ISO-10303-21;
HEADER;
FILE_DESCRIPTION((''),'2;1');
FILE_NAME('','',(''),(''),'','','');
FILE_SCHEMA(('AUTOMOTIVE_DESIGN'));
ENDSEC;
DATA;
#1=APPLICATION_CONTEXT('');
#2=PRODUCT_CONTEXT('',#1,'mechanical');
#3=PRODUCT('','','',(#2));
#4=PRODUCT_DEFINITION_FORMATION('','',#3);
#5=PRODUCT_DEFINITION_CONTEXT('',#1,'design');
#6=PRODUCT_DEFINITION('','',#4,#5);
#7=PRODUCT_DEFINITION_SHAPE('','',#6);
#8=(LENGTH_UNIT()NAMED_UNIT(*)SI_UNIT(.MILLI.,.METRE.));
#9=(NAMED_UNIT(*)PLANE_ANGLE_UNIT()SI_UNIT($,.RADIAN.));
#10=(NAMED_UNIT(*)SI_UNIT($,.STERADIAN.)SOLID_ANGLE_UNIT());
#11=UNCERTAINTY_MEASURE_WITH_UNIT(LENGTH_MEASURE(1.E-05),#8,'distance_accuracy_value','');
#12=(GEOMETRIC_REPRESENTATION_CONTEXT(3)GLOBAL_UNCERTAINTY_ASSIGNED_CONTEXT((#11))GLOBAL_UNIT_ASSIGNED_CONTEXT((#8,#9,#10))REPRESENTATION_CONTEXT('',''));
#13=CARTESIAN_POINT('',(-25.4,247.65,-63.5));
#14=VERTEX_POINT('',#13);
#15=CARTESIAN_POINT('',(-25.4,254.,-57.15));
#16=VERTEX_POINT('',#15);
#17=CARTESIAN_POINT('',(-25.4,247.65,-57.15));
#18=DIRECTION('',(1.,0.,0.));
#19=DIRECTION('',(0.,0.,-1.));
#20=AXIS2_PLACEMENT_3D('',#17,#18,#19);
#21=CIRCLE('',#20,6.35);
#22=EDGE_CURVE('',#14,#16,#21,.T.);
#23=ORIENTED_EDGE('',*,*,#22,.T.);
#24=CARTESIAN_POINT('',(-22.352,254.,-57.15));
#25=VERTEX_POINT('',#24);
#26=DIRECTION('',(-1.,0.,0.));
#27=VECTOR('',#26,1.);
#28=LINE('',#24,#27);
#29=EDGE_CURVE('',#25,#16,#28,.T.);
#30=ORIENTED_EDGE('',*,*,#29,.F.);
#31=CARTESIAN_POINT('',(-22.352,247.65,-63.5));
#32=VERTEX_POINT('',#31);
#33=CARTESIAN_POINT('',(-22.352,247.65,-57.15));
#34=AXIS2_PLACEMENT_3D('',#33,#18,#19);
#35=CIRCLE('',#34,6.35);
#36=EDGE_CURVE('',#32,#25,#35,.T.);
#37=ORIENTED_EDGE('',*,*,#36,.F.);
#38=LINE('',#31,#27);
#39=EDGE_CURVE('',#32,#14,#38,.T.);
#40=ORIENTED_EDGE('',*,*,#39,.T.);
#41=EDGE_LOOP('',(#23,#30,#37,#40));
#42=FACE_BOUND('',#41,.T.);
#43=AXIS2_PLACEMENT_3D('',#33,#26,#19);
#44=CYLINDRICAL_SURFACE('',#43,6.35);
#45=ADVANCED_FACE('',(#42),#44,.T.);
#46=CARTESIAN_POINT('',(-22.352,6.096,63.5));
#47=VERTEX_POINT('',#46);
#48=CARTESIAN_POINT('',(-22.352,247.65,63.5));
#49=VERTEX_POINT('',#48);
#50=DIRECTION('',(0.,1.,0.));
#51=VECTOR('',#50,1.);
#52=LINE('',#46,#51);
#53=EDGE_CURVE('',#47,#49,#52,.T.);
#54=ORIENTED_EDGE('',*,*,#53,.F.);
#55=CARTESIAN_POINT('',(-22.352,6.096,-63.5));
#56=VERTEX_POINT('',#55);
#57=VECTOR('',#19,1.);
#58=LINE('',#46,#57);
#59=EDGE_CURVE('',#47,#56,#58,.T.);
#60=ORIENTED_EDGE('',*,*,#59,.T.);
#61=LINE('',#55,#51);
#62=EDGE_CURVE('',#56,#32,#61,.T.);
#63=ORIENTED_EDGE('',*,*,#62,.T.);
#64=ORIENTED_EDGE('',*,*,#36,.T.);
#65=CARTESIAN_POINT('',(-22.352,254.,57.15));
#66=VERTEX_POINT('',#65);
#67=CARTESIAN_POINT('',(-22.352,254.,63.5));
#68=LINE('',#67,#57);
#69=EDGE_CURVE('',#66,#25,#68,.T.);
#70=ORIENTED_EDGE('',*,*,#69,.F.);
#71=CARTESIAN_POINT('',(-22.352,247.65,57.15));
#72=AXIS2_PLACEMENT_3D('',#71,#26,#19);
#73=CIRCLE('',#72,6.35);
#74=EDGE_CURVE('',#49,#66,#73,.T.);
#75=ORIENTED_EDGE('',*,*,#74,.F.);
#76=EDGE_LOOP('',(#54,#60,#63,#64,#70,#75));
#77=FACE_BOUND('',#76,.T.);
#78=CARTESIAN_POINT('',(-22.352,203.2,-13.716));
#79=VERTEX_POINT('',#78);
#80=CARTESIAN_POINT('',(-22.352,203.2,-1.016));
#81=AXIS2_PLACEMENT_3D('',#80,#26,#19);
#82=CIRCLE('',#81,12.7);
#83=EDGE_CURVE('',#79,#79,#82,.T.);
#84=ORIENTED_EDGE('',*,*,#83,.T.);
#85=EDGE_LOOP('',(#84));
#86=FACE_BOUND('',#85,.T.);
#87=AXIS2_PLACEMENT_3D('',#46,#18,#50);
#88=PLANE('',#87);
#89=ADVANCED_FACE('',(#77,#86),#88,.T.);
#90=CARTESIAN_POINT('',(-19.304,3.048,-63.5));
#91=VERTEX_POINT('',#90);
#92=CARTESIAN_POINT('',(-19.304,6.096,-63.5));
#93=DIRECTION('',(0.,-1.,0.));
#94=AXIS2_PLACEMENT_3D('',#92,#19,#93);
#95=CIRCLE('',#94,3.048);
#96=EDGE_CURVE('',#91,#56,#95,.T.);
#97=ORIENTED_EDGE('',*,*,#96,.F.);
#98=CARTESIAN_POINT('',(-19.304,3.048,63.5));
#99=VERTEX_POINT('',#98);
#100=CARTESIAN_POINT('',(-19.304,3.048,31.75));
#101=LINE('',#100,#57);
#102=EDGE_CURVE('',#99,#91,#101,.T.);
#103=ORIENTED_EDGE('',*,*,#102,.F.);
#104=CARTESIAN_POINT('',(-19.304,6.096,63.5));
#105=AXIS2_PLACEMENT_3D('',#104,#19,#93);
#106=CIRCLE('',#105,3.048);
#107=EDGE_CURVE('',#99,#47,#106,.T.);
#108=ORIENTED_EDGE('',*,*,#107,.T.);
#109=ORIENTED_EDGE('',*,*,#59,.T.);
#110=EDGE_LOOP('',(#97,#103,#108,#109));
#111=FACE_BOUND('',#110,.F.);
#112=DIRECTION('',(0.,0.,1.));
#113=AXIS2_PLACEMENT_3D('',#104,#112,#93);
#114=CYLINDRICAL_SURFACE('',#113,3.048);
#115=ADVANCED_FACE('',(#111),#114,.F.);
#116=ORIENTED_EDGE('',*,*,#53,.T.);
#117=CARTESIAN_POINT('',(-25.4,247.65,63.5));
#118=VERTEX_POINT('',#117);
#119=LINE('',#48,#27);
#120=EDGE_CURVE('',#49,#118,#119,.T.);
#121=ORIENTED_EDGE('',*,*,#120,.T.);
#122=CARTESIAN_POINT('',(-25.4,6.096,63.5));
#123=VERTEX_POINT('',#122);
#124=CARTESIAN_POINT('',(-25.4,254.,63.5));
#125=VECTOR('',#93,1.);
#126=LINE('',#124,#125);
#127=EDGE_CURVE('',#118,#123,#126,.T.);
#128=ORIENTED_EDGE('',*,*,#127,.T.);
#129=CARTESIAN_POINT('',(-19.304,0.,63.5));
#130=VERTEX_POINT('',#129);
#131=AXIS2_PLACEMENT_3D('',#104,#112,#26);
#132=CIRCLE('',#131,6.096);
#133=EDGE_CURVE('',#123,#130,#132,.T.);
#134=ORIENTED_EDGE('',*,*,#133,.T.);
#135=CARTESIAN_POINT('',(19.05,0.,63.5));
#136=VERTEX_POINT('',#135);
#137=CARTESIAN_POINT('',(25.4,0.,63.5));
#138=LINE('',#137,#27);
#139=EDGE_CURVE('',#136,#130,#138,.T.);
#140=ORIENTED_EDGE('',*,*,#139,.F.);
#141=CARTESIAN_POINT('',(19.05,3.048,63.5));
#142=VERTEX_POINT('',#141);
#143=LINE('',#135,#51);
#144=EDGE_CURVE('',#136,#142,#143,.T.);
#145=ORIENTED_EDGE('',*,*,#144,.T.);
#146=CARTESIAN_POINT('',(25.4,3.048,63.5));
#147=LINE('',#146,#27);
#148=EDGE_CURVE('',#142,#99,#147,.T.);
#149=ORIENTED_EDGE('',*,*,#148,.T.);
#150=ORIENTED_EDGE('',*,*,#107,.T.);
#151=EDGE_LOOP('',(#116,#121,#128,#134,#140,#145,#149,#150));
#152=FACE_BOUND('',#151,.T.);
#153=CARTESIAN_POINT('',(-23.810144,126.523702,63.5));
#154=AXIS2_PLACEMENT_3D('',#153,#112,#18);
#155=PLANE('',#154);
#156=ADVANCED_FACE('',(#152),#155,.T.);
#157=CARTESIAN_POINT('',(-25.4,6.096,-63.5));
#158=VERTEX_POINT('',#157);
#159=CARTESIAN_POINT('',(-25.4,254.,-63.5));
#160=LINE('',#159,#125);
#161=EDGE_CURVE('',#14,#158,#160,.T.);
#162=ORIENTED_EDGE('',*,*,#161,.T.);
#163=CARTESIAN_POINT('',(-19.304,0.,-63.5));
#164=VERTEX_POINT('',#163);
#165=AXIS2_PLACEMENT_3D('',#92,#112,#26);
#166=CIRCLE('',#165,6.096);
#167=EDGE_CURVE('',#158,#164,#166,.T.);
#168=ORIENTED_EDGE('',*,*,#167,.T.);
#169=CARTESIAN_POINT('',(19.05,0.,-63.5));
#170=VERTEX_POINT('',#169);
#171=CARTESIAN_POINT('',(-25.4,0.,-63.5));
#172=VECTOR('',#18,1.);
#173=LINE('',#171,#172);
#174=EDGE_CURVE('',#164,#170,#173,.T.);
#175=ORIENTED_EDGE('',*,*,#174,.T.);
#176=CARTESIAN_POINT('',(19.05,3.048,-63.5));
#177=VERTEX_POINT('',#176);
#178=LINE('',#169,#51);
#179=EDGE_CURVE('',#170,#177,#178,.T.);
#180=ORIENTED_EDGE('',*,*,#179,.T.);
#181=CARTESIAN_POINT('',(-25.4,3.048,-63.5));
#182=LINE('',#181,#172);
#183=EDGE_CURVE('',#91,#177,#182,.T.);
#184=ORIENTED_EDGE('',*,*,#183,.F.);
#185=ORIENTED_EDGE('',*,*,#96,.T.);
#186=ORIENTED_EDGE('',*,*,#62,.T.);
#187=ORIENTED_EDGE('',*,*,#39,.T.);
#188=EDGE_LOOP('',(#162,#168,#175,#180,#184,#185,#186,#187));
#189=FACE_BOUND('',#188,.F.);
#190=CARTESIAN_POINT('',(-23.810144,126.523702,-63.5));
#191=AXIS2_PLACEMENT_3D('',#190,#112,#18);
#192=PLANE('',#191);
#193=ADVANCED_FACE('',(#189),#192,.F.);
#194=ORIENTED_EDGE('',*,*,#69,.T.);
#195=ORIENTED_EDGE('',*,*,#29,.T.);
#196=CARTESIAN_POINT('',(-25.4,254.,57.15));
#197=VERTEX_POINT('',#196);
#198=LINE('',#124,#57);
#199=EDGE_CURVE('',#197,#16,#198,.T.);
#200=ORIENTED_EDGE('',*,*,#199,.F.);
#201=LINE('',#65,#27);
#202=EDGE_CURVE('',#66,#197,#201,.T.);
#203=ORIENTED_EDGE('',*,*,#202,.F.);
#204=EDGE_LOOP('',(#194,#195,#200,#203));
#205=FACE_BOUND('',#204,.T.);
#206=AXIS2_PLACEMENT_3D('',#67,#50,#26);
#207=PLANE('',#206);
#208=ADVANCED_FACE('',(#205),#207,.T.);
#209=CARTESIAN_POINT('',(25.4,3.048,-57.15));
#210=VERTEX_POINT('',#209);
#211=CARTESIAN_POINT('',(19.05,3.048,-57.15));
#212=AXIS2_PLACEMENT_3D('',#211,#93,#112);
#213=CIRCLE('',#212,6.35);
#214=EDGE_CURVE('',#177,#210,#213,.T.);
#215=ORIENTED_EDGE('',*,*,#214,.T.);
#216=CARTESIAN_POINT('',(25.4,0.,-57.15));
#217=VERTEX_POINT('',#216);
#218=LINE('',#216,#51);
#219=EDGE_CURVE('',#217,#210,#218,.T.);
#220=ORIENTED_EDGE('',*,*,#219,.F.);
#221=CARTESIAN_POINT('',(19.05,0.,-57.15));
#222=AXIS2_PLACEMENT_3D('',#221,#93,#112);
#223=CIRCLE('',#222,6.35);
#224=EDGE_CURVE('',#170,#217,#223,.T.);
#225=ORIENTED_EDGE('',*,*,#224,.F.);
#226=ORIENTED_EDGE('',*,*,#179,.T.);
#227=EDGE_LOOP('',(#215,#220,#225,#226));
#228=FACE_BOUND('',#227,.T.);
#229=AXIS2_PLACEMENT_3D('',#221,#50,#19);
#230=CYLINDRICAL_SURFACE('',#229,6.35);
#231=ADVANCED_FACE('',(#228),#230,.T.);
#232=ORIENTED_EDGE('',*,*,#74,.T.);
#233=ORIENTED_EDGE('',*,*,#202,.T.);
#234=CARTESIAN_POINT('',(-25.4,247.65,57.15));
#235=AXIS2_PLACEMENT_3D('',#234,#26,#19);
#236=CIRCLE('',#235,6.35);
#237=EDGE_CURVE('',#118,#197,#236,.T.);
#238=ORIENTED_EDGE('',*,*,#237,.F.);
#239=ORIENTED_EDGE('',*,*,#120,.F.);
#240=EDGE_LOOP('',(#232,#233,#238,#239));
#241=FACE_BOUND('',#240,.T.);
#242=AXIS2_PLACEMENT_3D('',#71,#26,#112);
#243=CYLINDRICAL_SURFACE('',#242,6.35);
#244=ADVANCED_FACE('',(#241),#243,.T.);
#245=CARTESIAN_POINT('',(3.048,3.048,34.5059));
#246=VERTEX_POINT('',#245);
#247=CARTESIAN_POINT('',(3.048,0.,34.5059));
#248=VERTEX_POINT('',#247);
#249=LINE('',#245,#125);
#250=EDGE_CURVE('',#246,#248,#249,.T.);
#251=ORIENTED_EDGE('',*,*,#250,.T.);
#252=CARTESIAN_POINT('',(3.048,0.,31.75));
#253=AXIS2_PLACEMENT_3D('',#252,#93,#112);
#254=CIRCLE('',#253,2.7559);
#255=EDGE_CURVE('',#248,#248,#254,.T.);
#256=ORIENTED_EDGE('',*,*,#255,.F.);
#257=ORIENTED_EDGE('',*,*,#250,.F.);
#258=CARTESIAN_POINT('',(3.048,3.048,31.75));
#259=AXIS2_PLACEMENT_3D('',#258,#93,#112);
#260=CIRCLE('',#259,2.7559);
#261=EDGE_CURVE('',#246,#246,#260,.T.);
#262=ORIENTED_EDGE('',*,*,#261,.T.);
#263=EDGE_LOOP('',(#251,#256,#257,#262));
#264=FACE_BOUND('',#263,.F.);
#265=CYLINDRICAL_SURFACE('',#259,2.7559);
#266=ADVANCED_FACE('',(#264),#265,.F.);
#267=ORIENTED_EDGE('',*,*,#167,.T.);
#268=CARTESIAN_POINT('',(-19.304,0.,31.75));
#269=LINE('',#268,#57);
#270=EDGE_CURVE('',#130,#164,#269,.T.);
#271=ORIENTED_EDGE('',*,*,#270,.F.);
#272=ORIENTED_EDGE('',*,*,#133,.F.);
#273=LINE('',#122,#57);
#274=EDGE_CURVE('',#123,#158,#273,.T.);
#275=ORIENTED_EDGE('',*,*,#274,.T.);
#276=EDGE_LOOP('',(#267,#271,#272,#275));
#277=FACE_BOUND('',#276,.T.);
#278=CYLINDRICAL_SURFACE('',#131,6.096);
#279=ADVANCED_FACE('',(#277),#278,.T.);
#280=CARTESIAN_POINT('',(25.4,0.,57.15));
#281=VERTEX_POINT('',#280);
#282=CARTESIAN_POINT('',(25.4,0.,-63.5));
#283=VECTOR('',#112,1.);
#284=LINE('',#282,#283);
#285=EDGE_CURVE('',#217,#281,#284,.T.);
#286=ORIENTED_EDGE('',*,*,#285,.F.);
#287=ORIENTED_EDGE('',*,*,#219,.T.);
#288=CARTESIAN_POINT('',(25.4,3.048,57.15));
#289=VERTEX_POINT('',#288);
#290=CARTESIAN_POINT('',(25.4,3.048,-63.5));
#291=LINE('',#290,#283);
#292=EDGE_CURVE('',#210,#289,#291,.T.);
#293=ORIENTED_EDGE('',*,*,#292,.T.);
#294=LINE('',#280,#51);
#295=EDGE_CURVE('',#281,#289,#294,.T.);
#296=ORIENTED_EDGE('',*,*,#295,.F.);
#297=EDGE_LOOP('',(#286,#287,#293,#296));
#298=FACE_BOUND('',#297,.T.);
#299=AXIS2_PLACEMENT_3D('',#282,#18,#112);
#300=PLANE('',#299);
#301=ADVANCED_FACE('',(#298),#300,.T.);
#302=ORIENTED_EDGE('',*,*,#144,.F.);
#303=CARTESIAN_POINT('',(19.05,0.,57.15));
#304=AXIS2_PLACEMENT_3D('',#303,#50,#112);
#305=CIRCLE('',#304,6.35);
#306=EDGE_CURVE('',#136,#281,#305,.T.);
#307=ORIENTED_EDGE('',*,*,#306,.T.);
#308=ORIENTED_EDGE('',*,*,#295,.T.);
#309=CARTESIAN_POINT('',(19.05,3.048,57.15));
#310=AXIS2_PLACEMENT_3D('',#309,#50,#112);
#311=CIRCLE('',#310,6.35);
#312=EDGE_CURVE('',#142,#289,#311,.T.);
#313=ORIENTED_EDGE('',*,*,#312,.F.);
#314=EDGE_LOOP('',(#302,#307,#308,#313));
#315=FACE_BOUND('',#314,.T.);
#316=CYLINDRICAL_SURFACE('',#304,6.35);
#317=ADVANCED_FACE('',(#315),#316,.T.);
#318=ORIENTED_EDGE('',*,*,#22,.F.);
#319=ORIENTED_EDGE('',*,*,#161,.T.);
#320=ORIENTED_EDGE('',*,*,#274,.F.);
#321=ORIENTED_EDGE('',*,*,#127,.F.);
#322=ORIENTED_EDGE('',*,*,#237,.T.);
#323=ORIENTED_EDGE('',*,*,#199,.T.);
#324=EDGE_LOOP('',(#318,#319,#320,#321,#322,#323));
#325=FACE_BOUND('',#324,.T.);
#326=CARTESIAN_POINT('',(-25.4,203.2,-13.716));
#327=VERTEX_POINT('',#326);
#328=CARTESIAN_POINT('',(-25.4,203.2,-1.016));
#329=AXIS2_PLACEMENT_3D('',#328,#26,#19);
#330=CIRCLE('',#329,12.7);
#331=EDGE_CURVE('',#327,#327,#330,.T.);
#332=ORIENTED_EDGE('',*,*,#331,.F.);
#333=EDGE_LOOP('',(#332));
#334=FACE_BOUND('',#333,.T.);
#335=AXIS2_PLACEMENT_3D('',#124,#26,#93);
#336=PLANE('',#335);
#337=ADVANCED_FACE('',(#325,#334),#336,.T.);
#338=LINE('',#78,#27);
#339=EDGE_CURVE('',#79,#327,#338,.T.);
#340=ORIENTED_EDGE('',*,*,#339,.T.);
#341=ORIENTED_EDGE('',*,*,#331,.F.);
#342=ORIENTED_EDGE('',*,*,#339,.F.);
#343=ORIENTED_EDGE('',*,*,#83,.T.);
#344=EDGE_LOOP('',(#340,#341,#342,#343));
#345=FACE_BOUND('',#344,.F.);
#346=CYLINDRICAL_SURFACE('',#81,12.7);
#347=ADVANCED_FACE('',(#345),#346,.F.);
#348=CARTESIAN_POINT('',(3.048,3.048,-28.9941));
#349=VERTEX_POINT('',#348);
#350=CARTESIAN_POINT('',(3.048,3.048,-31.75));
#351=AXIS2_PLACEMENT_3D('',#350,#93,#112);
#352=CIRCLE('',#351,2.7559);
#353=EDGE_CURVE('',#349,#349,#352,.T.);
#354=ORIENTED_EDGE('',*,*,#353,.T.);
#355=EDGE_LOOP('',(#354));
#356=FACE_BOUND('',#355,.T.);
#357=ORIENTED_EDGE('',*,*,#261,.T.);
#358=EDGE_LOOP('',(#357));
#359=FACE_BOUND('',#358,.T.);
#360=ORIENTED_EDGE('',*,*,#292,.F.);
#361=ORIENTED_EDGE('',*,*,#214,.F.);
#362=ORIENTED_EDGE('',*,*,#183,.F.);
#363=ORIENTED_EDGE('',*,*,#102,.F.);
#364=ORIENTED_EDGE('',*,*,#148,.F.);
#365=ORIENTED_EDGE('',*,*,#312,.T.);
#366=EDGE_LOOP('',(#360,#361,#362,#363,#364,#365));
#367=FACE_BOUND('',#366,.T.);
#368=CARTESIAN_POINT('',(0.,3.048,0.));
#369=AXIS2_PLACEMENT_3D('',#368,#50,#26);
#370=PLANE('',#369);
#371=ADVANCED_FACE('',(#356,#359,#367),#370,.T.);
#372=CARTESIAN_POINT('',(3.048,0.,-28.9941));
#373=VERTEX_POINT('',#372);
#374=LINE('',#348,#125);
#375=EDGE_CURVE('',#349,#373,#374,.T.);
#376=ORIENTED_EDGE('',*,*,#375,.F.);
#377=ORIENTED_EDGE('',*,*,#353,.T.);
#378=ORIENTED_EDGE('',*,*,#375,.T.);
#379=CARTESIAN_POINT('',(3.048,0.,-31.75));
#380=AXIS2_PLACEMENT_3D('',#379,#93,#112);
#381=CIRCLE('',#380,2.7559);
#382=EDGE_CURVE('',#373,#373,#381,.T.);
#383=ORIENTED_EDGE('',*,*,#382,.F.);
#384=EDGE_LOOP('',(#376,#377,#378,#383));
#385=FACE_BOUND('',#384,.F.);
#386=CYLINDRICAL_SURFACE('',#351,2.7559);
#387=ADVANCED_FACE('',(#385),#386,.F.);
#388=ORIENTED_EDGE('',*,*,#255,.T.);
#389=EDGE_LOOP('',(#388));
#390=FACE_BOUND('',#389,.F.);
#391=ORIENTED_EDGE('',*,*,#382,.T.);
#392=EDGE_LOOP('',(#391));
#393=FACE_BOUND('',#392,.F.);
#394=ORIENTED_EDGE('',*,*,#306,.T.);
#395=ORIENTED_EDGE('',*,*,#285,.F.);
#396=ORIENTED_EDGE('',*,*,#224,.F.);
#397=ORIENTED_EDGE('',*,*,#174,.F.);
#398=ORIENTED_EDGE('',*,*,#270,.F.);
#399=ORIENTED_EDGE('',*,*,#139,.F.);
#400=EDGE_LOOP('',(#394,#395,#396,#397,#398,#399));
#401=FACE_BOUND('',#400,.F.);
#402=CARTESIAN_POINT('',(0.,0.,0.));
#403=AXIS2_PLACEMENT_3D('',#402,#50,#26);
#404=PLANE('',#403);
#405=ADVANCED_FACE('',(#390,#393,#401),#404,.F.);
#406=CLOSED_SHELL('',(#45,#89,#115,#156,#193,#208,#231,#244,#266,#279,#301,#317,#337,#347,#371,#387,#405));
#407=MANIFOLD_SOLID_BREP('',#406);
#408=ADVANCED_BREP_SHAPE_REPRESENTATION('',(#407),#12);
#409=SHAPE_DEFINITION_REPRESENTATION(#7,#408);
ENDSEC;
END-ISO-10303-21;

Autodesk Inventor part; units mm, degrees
ref_plane "YZ Plane" through (0, 0, 0) normal (1, 0, 0) x (0, 1, 0)
ref_plane "XZ Plane" through (0, 0, 0) normal (0, 1, 0) x (-1, 0, 0)
ref_plane "XY Plane" through (0, 0, 0) normal (0, 0, 1) x (1, 0, 0)
sketch "Sketch1" plane through (0, 0, 0) normal (0, 1, 0) x (-1, 0, 0)
  line L0 (-25.4, 63.5) -> (25.4, 63.5)
  line L1 (25.4, 63.5) -> (25.4, -63.5)
  line L2 (25.4, -63.5) -> (-25.4, -63.5)
  line L3 (-25.4, -63.5) -> (-25.4, 63.5)
  line L4 (-25.4, 63.5) -> (25.4, -63.5) construction
  line L5 (25.4, 63.5) -> (-25.4, -63.5) construction
  point P0 (0, 0)
  dimension "d0" = 50.8
  dimension "d1" = 127
extrude "Plate1" add sketch "Sketch1" along normal blind 3.048
sketch "Sketch2" plane through (-22.352, 0, 63.5) normal (-1, 0, 0) x (0, -1, 0)
  line L0 (0, -127) -> (0, 0)
  line L1 (0, 0) -> (-254, 0)
  line L2 (-254, 0) -> (-254, -127)
  line L3 (-254, -127) -> (0, -127)
edge flange "Flange1" height 254 angle 90 thickness 3.048 bend radius 3.048 thickness toward (-1, 0, 0) relief tear relief width 3.048 relief depth 1.524 edges at (-25.4, 3.048, 0) wall of the first edge with corners at (-22.352, 0, -63.5) (-22.352, 0, 63.5) (-22.352, 254, 63.5) (-22.352, 254, -63.5)
bend "Bend1"
corner "Corner1"
sketch "Sketch3" plane through (0, 3.048, 0) normal (0, 1, 0) x (1, 0, 0)
  line L0 (25.4, -63.5) -> (-19.304, -63.5) construction
  line L1 (3.048, -63.5) -> (3.048, 63.5) construction
  line L2 (-19.304, 63.5) -> (25.4, 63.5) construction
  point P0 (0, 0)
  point P1 (3.048, -31.75)
  point P2 (3.048, 31.75)
  dimension "d20" = 63.5
  dimension "d21" = 31.75
hole "Hole1" at (3.048, 3.048, 31.75) at (3.048, 3.048, -31.75) direction (0, -1, 0) diameter 5.5118 end through all clearance for "Hex Head Cap Screw ISO 24017" size "M5" standard "ISO"
fillet "Corner Round1" radius 6.35 4 edges at (-23.876, 254, -63.5) (25.4, 1.524, 63.5) (25.4, 1.524, -63.5) (-23.876, 254, 63.5)
sketch "Sketch4" plane through (-22.352, 6.096, 63.5) normal (1, 0, 0) x (0, 0, -1)
  line L0 (0, 0) -> (0, 241.554) construction
  line L1 (120.65, 247.904) -> (6.35, 247.904) construction
  point P0 (63.5, -6.096)
  point P1 (64.516, 197.104)
  dimension "d23" = 64.516
  dimension "d31" = 50.8
hole "Hole2" at (-22.352, 203.2, -1.016) direction (-1, 0, 0) diameter 25.4 end through all
equation "\"d21\" = 0.5 * d20"
equation "\"d18\" = Thickness"
equation "\"d2\" = Thickness"
equation "\"d3\" = BendReliefWidth"
equation "\"d4\" = BendReliefDepth"
equation "\"d5\" = MinimumRemnant"
equation "\"d6\" = TransitionRadius"
equation "\"d9\" = BendRadius"
equation "\"d10\" = CornerReliefSize"
equation "\"d11\" = GapSize"
equation "\"d12\" = JacobiRadiusSize"
equation "\"BendRadius\" = Thickness"
equation "\"BendReliefWidth\" = Thickness"
equation "\"BendReliefDepth\" = 0.5 * Thickness"
equation "\"CornerReliefSize\" = 4 * Thickness"
equation "\"MinimumRemnant\" = 2 * Thickness"
equation "\"TransitionRadius\" = BendRadius"
equation "\"JacobiRadiusSize\" = BendRadius"
equation "\"GapSize\" = Thickness"
equation "\"Thickness\" = 3.048"
properties part number "Bracket"
